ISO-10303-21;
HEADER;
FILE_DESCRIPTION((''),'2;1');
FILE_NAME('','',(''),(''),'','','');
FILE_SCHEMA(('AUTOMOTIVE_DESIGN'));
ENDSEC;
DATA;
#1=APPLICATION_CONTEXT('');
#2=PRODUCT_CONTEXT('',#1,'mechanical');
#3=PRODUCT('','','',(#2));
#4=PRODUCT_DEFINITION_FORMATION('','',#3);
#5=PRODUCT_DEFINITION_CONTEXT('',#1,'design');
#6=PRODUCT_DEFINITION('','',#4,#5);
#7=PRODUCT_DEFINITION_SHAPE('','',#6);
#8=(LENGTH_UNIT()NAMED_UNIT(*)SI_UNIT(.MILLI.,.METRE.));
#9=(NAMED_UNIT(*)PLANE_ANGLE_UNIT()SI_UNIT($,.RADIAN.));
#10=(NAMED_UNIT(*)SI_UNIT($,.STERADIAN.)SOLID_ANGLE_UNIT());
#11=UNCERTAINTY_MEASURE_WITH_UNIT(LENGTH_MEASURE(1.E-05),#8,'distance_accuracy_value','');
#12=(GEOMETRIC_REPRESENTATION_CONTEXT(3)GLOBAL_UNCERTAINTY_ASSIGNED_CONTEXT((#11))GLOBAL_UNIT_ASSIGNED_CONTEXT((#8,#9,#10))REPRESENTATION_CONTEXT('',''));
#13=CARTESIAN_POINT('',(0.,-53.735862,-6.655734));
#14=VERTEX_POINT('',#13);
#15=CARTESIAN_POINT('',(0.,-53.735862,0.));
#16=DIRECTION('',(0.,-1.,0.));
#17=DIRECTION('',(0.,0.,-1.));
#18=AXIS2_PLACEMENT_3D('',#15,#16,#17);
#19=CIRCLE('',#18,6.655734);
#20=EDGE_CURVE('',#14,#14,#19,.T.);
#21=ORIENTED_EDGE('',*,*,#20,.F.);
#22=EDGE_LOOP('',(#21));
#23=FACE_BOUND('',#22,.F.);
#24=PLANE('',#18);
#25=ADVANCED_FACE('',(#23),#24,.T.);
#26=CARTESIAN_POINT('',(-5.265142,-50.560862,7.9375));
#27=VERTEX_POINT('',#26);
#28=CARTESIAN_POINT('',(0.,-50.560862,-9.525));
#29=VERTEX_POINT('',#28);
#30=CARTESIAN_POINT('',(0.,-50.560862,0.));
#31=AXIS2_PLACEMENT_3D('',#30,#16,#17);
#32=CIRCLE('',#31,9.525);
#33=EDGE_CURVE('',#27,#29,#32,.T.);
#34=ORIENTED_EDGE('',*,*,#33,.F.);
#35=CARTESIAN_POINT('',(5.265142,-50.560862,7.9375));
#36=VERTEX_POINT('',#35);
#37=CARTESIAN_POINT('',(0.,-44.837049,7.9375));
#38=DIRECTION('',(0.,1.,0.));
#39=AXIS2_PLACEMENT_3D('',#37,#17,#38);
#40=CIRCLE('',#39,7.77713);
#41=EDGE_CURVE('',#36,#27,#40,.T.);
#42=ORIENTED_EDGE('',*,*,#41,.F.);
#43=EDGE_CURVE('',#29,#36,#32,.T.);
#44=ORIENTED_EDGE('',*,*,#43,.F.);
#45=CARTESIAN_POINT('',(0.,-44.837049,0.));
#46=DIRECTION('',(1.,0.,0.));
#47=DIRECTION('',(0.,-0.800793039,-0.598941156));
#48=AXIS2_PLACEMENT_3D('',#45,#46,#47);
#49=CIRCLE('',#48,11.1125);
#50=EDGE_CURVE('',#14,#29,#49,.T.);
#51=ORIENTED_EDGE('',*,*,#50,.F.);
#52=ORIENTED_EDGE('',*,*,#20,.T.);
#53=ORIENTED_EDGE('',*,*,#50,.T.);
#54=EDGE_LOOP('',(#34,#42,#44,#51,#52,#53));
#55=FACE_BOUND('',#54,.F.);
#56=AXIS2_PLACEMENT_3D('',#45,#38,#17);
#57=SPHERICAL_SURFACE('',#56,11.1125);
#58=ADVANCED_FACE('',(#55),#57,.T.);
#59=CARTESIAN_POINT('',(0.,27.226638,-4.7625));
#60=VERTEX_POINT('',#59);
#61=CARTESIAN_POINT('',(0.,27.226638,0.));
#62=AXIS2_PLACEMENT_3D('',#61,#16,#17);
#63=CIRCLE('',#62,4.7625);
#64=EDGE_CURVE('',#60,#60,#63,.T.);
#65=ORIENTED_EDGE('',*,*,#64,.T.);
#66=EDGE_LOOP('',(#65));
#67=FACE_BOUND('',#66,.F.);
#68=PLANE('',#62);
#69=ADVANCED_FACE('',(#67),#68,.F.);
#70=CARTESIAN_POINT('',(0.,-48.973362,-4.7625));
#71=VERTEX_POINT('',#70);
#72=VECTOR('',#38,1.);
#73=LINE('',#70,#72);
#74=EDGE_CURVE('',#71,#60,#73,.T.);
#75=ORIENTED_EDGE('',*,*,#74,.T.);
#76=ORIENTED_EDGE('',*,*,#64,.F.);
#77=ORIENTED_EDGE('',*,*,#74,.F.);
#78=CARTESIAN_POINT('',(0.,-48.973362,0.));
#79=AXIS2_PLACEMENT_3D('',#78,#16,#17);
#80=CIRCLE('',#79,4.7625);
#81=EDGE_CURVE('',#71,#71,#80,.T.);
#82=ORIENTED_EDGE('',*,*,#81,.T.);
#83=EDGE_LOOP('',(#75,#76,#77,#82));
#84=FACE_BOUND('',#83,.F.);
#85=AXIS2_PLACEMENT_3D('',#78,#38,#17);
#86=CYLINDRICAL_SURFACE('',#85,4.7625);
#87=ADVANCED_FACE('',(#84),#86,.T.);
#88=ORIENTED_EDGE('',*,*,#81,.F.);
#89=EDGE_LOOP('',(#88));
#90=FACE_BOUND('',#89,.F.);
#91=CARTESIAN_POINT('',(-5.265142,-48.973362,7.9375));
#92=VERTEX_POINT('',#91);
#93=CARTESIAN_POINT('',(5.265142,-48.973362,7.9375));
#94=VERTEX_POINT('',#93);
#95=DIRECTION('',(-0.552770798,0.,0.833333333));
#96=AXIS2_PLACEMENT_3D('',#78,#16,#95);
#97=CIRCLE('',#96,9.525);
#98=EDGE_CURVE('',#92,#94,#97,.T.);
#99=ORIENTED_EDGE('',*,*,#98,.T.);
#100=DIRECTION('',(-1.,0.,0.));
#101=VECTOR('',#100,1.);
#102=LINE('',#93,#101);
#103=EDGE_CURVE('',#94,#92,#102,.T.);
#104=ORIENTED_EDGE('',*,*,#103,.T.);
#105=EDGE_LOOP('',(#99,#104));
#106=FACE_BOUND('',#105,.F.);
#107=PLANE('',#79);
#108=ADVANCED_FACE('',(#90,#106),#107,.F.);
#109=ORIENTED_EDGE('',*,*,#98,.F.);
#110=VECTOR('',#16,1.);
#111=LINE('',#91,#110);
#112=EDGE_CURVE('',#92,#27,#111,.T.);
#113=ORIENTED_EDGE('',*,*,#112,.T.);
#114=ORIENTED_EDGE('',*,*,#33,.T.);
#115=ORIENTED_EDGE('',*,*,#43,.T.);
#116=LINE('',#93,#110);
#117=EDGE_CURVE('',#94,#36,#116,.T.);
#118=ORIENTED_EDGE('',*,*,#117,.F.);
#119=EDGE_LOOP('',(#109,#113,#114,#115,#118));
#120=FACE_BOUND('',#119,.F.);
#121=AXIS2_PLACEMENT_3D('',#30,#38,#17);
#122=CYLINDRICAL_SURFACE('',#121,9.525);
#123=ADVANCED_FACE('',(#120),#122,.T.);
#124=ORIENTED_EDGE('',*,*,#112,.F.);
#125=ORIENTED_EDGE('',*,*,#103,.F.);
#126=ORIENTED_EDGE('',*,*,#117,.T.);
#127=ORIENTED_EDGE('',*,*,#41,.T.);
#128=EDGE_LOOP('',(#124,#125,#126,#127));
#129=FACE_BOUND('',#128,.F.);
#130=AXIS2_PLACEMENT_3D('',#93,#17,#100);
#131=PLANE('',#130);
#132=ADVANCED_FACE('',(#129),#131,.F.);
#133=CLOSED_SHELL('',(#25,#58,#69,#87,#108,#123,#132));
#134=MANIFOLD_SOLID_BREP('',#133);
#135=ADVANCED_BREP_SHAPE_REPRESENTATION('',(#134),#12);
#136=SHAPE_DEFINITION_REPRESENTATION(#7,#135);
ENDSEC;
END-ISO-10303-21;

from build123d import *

# Parameters (mm, degrees)
F3_DEPTH = 4.7635


with BuildPart() as f1:
    # F0 (on Right) → F1 (revolve)
    with BuildSketch(Plane.YZ):
        Polygon((27.2266382913, 0), (0, 0), (-44.8370490589, 0), (-48.9733617087, 0), (-48.9733617087, -4.7625), (27.2266382913, -4.7625), align=None)
        with BuildLine():
            Line((-48.9733617087, -4.7625), (-48.9733617087, 0))
            Line((-48.9733617087, 0), (-53.7358617087, 0))
            Line((-53.7358617087, 0), (-53.7358617087, -6.655733594))
            ThreePointArc((-53.7358617087, -6.655733594), (-52.2877849347, -8.2446462119), (-50.5608617087, -9.525))
            Line((-50.5608617087, -9.525), (-48.9733617087, -9.525))
            Line((-48.9733617087, -9.525), (-48.9733617087, -4.7625))
        make_face()
    revolve(axis=Axis((0, -10.8733617087, 0), (0, -1, 0)))

    # F2 (on face) → F3 (cut, through all)
    with BuildSketch(Plane(origin=(0, -48.9733617087, 0), x_dir=(-1, 0, 0), z_dir=(0, 1, 0))):
        with BuildLine():
            Line((-5.2651418547, 7.9375), (0, 7.9375))
            Line((0, 7.9375), (5.2651418547, 7.9375))
            ThreePointArc((5.2651418547, 7.9375), (0, 9.525), (-5.2651418547, 7.9375))
        make_face()
    extrude(amount=-F3_DEPTH, mode=Mode.SUBTRACT)


solid = f1.part
